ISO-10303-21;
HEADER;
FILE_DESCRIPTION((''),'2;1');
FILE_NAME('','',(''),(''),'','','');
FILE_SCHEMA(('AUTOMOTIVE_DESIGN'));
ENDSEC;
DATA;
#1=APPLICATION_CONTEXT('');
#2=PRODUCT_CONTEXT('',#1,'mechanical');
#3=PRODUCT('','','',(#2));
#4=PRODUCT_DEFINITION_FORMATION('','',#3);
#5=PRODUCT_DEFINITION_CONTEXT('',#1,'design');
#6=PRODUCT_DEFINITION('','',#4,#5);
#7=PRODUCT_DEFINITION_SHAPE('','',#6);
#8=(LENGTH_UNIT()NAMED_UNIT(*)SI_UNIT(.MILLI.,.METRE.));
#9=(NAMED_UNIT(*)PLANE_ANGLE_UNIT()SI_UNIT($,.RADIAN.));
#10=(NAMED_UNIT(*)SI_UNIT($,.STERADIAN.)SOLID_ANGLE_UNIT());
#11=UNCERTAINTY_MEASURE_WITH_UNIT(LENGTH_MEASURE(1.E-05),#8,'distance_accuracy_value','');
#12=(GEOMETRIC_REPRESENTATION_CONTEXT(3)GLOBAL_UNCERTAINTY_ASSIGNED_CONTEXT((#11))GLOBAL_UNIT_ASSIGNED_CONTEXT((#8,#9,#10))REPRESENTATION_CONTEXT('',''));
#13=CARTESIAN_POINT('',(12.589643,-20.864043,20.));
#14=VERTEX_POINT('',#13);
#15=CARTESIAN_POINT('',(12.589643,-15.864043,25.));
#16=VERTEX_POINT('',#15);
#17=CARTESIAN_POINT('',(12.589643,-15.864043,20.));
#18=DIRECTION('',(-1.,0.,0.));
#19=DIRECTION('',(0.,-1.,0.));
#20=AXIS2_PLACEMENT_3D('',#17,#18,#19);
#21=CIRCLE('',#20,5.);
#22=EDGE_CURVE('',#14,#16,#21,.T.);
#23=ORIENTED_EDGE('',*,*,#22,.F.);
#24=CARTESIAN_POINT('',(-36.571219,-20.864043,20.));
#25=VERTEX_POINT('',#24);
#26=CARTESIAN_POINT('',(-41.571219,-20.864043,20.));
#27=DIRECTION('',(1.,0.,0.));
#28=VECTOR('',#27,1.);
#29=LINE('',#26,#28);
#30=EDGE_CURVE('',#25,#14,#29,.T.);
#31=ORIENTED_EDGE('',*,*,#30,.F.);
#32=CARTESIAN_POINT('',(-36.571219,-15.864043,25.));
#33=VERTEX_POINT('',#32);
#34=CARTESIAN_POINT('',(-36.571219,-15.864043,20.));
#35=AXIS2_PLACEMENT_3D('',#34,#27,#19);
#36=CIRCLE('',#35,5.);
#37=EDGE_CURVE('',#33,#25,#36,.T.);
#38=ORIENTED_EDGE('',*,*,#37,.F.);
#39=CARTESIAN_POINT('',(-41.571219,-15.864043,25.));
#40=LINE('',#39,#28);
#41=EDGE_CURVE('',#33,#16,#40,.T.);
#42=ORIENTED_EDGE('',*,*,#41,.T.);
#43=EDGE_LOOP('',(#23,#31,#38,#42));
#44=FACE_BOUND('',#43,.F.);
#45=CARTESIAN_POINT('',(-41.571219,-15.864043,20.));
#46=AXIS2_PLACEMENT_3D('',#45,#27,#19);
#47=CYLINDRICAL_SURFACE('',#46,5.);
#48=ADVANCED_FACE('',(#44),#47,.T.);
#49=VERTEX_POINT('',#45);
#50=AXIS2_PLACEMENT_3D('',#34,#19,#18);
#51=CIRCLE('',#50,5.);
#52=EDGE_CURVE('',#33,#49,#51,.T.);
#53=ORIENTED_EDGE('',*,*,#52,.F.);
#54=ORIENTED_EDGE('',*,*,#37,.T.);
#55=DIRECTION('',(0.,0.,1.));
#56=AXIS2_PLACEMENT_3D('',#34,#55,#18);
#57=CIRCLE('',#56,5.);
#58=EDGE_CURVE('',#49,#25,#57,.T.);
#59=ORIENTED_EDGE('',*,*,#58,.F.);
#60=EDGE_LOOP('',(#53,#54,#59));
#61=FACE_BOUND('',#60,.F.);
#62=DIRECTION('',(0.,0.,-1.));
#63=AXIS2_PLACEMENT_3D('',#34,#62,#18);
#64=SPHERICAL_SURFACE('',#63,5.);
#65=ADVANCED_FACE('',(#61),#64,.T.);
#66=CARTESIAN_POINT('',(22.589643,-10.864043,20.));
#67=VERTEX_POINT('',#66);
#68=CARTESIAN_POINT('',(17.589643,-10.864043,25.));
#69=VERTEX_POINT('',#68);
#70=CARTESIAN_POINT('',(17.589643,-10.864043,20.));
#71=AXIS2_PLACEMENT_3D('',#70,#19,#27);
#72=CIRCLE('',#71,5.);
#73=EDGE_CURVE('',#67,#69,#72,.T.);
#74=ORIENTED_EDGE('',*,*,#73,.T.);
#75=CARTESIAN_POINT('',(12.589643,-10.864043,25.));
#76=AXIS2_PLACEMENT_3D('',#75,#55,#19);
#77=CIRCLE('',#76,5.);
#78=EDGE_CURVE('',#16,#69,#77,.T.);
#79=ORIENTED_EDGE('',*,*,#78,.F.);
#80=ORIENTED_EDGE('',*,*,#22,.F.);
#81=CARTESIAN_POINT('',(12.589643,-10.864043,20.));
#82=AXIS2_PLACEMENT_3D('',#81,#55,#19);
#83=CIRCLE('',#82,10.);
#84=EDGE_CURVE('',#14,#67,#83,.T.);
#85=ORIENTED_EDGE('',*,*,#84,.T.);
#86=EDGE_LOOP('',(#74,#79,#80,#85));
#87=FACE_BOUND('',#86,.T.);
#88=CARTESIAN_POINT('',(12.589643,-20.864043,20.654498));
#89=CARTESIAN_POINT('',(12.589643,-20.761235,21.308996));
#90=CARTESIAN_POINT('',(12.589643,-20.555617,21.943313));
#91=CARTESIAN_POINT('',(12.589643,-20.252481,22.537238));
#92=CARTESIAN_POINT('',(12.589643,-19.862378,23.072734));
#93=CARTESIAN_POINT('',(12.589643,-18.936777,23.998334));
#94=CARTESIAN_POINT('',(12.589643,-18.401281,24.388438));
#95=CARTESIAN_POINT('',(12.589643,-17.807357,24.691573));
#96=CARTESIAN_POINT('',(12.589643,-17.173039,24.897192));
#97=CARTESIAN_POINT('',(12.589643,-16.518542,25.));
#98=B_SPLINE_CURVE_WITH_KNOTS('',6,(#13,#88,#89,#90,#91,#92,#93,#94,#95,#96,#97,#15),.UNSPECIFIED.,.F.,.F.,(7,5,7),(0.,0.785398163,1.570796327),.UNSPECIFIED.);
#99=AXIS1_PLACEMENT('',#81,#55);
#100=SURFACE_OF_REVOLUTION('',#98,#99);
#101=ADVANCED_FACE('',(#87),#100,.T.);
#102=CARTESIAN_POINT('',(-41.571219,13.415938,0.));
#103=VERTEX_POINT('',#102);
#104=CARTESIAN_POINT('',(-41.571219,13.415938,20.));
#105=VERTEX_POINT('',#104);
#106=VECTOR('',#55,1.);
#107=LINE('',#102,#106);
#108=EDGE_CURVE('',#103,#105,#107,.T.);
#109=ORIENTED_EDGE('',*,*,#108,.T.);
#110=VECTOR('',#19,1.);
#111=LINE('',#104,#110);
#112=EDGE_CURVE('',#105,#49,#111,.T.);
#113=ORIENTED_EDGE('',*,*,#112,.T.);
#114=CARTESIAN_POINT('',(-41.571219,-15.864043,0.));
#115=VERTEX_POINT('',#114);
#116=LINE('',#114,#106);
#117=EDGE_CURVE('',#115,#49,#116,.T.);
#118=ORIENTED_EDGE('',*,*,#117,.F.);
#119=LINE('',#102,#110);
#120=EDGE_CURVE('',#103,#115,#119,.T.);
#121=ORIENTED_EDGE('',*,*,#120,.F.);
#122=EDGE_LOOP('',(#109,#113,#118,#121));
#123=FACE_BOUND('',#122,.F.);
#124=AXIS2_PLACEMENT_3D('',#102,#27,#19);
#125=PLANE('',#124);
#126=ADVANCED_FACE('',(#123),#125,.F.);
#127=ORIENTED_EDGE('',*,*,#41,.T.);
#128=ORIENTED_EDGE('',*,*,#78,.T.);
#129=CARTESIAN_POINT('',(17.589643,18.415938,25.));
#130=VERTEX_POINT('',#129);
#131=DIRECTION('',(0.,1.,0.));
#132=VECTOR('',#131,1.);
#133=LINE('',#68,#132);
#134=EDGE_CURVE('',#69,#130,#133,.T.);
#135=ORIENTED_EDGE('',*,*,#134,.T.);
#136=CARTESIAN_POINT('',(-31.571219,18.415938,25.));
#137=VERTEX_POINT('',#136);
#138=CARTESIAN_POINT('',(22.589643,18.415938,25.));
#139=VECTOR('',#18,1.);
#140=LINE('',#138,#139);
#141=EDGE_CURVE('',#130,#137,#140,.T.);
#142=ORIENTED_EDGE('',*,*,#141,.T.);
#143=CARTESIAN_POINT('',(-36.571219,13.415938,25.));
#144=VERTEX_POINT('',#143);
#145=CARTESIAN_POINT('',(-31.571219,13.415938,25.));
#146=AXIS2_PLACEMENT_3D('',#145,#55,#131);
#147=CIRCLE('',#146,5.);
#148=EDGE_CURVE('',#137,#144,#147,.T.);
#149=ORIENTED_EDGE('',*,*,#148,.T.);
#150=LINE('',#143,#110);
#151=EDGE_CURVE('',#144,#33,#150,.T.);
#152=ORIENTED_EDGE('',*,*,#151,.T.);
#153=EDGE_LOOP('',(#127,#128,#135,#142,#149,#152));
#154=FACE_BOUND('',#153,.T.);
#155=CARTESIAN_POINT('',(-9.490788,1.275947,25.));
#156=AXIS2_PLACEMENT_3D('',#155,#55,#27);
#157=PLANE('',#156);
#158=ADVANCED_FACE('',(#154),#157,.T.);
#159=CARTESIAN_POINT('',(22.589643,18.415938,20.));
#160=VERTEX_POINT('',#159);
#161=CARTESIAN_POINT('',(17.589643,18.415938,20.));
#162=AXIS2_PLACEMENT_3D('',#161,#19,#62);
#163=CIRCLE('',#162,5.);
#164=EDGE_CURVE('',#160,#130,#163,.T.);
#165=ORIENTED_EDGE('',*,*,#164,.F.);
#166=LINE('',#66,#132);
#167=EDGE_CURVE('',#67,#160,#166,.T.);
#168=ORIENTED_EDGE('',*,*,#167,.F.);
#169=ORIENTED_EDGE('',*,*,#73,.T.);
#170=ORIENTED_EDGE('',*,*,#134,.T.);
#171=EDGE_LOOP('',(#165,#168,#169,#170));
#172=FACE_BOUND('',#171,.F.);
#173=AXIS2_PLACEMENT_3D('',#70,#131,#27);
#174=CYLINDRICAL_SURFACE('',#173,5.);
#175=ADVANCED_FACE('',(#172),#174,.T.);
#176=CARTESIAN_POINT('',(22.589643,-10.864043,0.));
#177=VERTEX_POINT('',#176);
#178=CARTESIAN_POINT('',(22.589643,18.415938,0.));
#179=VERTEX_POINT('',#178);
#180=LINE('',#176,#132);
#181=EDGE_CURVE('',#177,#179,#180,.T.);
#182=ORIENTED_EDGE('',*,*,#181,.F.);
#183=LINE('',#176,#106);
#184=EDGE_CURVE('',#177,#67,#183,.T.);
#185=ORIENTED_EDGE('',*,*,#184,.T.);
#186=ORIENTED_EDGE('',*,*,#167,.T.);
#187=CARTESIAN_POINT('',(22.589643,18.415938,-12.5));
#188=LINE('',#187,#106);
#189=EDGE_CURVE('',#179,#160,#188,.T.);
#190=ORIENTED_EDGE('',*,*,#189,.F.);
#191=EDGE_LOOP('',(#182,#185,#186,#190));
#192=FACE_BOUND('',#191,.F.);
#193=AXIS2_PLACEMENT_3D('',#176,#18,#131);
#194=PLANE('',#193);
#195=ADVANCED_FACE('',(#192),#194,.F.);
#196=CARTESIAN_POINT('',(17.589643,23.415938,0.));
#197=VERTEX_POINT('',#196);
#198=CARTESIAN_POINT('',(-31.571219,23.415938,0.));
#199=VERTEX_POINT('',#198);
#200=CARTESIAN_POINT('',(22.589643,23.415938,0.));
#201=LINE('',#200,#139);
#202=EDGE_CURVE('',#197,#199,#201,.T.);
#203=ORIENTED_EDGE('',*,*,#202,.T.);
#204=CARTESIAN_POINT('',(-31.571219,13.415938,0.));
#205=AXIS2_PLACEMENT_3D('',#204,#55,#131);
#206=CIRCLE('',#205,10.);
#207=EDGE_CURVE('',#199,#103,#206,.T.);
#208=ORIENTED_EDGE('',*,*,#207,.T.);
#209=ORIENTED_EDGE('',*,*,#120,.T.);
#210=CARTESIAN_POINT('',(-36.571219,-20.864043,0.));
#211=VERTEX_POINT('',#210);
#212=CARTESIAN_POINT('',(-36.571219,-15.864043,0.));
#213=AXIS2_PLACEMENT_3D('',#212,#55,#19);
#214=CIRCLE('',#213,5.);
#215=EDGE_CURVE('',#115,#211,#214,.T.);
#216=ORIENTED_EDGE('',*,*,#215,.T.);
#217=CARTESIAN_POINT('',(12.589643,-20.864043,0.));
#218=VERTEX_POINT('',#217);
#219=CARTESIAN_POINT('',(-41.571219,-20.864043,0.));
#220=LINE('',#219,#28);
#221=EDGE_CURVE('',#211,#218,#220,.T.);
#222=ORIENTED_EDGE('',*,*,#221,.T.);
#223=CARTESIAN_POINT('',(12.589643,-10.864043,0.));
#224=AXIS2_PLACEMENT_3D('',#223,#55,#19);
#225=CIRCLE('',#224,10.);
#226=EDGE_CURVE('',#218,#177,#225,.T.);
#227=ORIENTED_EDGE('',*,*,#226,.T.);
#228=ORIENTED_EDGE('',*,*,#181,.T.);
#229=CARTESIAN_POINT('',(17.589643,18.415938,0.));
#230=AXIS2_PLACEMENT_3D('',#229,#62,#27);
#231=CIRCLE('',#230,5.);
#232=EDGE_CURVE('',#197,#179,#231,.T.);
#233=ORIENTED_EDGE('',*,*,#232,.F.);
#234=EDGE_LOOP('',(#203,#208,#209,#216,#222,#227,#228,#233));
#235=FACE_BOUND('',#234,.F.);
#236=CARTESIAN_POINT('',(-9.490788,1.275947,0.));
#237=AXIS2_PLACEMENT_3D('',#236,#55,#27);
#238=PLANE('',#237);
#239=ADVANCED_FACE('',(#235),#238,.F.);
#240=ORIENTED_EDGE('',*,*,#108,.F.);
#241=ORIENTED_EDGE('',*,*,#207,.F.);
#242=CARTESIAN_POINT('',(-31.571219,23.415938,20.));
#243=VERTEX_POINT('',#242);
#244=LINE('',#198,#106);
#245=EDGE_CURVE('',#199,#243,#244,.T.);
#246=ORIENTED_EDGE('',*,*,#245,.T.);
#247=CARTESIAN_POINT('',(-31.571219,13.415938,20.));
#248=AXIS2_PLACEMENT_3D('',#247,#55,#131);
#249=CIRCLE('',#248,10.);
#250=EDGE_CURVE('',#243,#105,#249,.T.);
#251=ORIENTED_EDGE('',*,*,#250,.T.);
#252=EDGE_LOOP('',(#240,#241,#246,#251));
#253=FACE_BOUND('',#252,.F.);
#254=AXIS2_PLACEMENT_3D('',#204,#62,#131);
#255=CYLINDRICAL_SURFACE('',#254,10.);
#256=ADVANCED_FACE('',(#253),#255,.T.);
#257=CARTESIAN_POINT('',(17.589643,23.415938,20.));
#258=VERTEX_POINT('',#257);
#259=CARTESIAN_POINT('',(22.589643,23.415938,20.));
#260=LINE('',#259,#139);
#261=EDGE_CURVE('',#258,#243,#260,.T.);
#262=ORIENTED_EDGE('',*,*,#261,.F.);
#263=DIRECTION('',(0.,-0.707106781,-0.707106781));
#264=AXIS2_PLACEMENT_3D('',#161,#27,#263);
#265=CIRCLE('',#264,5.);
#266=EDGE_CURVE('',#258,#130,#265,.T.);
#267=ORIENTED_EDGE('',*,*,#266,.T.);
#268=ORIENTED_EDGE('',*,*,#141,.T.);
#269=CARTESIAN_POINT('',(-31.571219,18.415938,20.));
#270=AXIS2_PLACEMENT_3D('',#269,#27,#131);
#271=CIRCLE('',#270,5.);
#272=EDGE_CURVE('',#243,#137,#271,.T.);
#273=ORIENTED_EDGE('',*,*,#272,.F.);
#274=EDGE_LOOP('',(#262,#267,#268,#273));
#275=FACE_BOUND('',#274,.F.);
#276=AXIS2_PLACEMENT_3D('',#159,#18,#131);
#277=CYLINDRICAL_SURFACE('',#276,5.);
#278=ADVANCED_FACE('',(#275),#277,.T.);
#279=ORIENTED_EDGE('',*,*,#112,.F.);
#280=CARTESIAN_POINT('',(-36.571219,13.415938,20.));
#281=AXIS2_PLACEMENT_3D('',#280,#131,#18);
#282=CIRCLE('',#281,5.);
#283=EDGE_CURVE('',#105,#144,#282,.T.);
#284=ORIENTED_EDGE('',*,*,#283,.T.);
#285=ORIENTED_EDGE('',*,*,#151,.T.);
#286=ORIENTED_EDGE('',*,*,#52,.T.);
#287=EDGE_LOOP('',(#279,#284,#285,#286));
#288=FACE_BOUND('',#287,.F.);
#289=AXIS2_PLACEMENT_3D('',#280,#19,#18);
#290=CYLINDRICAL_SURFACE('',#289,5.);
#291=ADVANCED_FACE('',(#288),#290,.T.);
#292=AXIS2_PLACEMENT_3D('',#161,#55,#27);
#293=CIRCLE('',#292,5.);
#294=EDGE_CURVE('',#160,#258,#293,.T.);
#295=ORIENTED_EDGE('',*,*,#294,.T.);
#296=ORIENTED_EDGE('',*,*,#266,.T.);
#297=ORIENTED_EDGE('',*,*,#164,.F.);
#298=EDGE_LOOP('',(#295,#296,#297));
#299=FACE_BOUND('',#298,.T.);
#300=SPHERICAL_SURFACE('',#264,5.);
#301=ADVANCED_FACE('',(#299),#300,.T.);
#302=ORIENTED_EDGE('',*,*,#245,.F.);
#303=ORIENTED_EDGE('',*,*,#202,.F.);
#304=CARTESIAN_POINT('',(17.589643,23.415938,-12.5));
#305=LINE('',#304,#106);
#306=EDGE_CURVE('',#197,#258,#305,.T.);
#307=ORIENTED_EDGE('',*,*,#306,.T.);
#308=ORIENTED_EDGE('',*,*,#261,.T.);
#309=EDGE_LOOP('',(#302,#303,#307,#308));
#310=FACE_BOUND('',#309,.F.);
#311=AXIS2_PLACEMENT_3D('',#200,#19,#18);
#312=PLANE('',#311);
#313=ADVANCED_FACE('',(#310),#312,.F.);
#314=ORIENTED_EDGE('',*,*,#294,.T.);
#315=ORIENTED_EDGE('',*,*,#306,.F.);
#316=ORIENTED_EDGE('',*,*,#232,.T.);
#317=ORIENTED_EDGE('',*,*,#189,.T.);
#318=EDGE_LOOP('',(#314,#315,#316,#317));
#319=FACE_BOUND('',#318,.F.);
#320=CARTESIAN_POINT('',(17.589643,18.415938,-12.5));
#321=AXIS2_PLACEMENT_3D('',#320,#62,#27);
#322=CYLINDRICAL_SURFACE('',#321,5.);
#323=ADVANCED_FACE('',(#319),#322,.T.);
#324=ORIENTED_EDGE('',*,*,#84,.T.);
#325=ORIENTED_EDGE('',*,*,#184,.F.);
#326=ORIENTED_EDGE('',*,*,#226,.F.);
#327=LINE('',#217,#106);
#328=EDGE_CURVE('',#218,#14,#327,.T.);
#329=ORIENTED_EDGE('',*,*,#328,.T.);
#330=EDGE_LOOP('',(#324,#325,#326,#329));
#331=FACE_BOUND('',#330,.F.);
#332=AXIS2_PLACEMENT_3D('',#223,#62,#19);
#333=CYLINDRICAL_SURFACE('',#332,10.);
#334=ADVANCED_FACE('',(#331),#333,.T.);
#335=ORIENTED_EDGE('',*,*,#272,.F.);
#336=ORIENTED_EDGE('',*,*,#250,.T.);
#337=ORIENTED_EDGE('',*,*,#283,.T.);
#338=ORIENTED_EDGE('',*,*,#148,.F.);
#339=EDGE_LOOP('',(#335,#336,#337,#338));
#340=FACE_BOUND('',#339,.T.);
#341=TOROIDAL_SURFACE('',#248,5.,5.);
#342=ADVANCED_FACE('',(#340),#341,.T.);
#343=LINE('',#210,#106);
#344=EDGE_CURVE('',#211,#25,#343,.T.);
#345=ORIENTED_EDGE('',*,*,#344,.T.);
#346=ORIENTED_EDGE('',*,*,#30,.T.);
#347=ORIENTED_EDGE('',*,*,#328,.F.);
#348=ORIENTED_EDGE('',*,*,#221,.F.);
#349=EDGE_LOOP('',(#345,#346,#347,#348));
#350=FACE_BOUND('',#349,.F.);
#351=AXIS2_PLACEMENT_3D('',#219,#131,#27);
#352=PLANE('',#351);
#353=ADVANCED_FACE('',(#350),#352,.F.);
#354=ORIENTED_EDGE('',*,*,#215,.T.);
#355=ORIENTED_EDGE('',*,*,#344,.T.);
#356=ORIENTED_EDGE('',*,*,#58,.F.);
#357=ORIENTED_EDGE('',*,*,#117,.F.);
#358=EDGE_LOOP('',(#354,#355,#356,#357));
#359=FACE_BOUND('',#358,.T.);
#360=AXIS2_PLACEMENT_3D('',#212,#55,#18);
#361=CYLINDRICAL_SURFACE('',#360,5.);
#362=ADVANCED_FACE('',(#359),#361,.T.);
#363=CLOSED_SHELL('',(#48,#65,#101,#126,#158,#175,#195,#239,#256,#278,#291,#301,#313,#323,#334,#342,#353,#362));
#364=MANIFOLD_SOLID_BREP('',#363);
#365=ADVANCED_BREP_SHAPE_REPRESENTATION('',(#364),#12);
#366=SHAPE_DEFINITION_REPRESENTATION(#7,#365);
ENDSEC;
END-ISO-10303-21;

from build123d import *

# Parameters (mm, degrees)
F1_DEPTH    = 25
F2_R        = 5
F3_T1_DEPTH = 32.5
F3_S5_W     = 5
F3_S5_H     = 5
F3_T6_DEPTH = 5


# Not quite as in the source:
# - a fillet or chamfer that OpenCascade refuses, or shapes differently, is made with other operations: its cross-section is extruded or revolved along the edge and cut away or added


with BuildPart() as f1:
    # F0 (on Top) → F1 (new body)
    with BuildSketch(Plane.XY):
        with BuildLine():
            Line((22.5896425545, 23.4159377009), (-31.5712185204, 23.4159377009))
            ThreePointArc((-31.5712185204, 23.4159377009), (-38.6422863323, 20.4870055127), (-41.5712185204, 13.4159377009))
            Line((-41.5712185204, 13.4159377009), (-41.5712185204, -20.8640433848))
            Line((-41.5712185204, -20.8640433848), (12.5896425545, -20.8640433848))
            ThreePointArc((12.5896425545, -20.8640433848), (19.6607103664, -17.9351111967), (22.5896425545, -10.8640433848))
            Line((22.5896425545, -10.8640433848), (22.5896425545, 23.4159377009))
        make_face()
    extrude(amount=F1_DEPTH)

    # F2
    f2_edges = [f1.edges().sort_by_distance(p)[0] for p in [
        (-41.571219, -20.864043, 12.5),
        (-41.571219, -3.724053, 25),
        (-14.490788, -20.864043, 25),
    ]]
    fillet(f2_edges, radius=F2_R)

    # F3: fillet of radius 5 on 1 edges, made by hand

    # F3_s2 → F3_t1 (cut)
    with BuildSketch(Plane.XY.offset(-12.5)):
        with BuildLine():
            ThreePointArc((22.5896425545, 18.4159377009), (21.1251764605, 21.9514716068), (17.5896425545, 23.4159377009))
            Line((17.5896425545, 23.4159377009), (22.5896425545, 23.4159377009))
            Line((22.5896425545, 23.4159377009), (22.5896425545, 18.4159377009))
        make_face()
    extrude(amount=F3_T1_DEPTH, mode=Mode.SUBTRACT)


with BuildPart() as f3_tool4:
    # F3_s5 → F3_t6 (new body)
    with BuildSketch(Plane.YZ.offset(17.5896425545)):
        with Locations((20.9159377009, 22.5)):
            Rectangle(F3_S5_W, F3_S5_H)
    extrude(amount=F3_T6_DEPTH)

    # F3_s7 → F3_t8 (revolve, cut)
    with BuildSketch(Plane(origin=(17.5896425545, 18.4159377009, 20), x_dir=(0, -0.7071067812, -0.7071067812), z_dir=(0, -0.7071067812, 0.7071067812))):
        with BuildLine():
            ThreePointArc((0, -5), (5, 0), (0, 5))
            Line((0, 5), (0, -5))
        make_face()
    revolve(axis=Axis((17.5896425545, 18.4159377009, 20), (1, 0, 0)), mode=Mode.SUBTRACT)


with BuildPart() as f1_1:
    add(f1.part)

    # F3_t3: cut F3_tool4
    add(f3_tool4.part, mode=Mode.SUBTRACT)


solid = f1_1.part
